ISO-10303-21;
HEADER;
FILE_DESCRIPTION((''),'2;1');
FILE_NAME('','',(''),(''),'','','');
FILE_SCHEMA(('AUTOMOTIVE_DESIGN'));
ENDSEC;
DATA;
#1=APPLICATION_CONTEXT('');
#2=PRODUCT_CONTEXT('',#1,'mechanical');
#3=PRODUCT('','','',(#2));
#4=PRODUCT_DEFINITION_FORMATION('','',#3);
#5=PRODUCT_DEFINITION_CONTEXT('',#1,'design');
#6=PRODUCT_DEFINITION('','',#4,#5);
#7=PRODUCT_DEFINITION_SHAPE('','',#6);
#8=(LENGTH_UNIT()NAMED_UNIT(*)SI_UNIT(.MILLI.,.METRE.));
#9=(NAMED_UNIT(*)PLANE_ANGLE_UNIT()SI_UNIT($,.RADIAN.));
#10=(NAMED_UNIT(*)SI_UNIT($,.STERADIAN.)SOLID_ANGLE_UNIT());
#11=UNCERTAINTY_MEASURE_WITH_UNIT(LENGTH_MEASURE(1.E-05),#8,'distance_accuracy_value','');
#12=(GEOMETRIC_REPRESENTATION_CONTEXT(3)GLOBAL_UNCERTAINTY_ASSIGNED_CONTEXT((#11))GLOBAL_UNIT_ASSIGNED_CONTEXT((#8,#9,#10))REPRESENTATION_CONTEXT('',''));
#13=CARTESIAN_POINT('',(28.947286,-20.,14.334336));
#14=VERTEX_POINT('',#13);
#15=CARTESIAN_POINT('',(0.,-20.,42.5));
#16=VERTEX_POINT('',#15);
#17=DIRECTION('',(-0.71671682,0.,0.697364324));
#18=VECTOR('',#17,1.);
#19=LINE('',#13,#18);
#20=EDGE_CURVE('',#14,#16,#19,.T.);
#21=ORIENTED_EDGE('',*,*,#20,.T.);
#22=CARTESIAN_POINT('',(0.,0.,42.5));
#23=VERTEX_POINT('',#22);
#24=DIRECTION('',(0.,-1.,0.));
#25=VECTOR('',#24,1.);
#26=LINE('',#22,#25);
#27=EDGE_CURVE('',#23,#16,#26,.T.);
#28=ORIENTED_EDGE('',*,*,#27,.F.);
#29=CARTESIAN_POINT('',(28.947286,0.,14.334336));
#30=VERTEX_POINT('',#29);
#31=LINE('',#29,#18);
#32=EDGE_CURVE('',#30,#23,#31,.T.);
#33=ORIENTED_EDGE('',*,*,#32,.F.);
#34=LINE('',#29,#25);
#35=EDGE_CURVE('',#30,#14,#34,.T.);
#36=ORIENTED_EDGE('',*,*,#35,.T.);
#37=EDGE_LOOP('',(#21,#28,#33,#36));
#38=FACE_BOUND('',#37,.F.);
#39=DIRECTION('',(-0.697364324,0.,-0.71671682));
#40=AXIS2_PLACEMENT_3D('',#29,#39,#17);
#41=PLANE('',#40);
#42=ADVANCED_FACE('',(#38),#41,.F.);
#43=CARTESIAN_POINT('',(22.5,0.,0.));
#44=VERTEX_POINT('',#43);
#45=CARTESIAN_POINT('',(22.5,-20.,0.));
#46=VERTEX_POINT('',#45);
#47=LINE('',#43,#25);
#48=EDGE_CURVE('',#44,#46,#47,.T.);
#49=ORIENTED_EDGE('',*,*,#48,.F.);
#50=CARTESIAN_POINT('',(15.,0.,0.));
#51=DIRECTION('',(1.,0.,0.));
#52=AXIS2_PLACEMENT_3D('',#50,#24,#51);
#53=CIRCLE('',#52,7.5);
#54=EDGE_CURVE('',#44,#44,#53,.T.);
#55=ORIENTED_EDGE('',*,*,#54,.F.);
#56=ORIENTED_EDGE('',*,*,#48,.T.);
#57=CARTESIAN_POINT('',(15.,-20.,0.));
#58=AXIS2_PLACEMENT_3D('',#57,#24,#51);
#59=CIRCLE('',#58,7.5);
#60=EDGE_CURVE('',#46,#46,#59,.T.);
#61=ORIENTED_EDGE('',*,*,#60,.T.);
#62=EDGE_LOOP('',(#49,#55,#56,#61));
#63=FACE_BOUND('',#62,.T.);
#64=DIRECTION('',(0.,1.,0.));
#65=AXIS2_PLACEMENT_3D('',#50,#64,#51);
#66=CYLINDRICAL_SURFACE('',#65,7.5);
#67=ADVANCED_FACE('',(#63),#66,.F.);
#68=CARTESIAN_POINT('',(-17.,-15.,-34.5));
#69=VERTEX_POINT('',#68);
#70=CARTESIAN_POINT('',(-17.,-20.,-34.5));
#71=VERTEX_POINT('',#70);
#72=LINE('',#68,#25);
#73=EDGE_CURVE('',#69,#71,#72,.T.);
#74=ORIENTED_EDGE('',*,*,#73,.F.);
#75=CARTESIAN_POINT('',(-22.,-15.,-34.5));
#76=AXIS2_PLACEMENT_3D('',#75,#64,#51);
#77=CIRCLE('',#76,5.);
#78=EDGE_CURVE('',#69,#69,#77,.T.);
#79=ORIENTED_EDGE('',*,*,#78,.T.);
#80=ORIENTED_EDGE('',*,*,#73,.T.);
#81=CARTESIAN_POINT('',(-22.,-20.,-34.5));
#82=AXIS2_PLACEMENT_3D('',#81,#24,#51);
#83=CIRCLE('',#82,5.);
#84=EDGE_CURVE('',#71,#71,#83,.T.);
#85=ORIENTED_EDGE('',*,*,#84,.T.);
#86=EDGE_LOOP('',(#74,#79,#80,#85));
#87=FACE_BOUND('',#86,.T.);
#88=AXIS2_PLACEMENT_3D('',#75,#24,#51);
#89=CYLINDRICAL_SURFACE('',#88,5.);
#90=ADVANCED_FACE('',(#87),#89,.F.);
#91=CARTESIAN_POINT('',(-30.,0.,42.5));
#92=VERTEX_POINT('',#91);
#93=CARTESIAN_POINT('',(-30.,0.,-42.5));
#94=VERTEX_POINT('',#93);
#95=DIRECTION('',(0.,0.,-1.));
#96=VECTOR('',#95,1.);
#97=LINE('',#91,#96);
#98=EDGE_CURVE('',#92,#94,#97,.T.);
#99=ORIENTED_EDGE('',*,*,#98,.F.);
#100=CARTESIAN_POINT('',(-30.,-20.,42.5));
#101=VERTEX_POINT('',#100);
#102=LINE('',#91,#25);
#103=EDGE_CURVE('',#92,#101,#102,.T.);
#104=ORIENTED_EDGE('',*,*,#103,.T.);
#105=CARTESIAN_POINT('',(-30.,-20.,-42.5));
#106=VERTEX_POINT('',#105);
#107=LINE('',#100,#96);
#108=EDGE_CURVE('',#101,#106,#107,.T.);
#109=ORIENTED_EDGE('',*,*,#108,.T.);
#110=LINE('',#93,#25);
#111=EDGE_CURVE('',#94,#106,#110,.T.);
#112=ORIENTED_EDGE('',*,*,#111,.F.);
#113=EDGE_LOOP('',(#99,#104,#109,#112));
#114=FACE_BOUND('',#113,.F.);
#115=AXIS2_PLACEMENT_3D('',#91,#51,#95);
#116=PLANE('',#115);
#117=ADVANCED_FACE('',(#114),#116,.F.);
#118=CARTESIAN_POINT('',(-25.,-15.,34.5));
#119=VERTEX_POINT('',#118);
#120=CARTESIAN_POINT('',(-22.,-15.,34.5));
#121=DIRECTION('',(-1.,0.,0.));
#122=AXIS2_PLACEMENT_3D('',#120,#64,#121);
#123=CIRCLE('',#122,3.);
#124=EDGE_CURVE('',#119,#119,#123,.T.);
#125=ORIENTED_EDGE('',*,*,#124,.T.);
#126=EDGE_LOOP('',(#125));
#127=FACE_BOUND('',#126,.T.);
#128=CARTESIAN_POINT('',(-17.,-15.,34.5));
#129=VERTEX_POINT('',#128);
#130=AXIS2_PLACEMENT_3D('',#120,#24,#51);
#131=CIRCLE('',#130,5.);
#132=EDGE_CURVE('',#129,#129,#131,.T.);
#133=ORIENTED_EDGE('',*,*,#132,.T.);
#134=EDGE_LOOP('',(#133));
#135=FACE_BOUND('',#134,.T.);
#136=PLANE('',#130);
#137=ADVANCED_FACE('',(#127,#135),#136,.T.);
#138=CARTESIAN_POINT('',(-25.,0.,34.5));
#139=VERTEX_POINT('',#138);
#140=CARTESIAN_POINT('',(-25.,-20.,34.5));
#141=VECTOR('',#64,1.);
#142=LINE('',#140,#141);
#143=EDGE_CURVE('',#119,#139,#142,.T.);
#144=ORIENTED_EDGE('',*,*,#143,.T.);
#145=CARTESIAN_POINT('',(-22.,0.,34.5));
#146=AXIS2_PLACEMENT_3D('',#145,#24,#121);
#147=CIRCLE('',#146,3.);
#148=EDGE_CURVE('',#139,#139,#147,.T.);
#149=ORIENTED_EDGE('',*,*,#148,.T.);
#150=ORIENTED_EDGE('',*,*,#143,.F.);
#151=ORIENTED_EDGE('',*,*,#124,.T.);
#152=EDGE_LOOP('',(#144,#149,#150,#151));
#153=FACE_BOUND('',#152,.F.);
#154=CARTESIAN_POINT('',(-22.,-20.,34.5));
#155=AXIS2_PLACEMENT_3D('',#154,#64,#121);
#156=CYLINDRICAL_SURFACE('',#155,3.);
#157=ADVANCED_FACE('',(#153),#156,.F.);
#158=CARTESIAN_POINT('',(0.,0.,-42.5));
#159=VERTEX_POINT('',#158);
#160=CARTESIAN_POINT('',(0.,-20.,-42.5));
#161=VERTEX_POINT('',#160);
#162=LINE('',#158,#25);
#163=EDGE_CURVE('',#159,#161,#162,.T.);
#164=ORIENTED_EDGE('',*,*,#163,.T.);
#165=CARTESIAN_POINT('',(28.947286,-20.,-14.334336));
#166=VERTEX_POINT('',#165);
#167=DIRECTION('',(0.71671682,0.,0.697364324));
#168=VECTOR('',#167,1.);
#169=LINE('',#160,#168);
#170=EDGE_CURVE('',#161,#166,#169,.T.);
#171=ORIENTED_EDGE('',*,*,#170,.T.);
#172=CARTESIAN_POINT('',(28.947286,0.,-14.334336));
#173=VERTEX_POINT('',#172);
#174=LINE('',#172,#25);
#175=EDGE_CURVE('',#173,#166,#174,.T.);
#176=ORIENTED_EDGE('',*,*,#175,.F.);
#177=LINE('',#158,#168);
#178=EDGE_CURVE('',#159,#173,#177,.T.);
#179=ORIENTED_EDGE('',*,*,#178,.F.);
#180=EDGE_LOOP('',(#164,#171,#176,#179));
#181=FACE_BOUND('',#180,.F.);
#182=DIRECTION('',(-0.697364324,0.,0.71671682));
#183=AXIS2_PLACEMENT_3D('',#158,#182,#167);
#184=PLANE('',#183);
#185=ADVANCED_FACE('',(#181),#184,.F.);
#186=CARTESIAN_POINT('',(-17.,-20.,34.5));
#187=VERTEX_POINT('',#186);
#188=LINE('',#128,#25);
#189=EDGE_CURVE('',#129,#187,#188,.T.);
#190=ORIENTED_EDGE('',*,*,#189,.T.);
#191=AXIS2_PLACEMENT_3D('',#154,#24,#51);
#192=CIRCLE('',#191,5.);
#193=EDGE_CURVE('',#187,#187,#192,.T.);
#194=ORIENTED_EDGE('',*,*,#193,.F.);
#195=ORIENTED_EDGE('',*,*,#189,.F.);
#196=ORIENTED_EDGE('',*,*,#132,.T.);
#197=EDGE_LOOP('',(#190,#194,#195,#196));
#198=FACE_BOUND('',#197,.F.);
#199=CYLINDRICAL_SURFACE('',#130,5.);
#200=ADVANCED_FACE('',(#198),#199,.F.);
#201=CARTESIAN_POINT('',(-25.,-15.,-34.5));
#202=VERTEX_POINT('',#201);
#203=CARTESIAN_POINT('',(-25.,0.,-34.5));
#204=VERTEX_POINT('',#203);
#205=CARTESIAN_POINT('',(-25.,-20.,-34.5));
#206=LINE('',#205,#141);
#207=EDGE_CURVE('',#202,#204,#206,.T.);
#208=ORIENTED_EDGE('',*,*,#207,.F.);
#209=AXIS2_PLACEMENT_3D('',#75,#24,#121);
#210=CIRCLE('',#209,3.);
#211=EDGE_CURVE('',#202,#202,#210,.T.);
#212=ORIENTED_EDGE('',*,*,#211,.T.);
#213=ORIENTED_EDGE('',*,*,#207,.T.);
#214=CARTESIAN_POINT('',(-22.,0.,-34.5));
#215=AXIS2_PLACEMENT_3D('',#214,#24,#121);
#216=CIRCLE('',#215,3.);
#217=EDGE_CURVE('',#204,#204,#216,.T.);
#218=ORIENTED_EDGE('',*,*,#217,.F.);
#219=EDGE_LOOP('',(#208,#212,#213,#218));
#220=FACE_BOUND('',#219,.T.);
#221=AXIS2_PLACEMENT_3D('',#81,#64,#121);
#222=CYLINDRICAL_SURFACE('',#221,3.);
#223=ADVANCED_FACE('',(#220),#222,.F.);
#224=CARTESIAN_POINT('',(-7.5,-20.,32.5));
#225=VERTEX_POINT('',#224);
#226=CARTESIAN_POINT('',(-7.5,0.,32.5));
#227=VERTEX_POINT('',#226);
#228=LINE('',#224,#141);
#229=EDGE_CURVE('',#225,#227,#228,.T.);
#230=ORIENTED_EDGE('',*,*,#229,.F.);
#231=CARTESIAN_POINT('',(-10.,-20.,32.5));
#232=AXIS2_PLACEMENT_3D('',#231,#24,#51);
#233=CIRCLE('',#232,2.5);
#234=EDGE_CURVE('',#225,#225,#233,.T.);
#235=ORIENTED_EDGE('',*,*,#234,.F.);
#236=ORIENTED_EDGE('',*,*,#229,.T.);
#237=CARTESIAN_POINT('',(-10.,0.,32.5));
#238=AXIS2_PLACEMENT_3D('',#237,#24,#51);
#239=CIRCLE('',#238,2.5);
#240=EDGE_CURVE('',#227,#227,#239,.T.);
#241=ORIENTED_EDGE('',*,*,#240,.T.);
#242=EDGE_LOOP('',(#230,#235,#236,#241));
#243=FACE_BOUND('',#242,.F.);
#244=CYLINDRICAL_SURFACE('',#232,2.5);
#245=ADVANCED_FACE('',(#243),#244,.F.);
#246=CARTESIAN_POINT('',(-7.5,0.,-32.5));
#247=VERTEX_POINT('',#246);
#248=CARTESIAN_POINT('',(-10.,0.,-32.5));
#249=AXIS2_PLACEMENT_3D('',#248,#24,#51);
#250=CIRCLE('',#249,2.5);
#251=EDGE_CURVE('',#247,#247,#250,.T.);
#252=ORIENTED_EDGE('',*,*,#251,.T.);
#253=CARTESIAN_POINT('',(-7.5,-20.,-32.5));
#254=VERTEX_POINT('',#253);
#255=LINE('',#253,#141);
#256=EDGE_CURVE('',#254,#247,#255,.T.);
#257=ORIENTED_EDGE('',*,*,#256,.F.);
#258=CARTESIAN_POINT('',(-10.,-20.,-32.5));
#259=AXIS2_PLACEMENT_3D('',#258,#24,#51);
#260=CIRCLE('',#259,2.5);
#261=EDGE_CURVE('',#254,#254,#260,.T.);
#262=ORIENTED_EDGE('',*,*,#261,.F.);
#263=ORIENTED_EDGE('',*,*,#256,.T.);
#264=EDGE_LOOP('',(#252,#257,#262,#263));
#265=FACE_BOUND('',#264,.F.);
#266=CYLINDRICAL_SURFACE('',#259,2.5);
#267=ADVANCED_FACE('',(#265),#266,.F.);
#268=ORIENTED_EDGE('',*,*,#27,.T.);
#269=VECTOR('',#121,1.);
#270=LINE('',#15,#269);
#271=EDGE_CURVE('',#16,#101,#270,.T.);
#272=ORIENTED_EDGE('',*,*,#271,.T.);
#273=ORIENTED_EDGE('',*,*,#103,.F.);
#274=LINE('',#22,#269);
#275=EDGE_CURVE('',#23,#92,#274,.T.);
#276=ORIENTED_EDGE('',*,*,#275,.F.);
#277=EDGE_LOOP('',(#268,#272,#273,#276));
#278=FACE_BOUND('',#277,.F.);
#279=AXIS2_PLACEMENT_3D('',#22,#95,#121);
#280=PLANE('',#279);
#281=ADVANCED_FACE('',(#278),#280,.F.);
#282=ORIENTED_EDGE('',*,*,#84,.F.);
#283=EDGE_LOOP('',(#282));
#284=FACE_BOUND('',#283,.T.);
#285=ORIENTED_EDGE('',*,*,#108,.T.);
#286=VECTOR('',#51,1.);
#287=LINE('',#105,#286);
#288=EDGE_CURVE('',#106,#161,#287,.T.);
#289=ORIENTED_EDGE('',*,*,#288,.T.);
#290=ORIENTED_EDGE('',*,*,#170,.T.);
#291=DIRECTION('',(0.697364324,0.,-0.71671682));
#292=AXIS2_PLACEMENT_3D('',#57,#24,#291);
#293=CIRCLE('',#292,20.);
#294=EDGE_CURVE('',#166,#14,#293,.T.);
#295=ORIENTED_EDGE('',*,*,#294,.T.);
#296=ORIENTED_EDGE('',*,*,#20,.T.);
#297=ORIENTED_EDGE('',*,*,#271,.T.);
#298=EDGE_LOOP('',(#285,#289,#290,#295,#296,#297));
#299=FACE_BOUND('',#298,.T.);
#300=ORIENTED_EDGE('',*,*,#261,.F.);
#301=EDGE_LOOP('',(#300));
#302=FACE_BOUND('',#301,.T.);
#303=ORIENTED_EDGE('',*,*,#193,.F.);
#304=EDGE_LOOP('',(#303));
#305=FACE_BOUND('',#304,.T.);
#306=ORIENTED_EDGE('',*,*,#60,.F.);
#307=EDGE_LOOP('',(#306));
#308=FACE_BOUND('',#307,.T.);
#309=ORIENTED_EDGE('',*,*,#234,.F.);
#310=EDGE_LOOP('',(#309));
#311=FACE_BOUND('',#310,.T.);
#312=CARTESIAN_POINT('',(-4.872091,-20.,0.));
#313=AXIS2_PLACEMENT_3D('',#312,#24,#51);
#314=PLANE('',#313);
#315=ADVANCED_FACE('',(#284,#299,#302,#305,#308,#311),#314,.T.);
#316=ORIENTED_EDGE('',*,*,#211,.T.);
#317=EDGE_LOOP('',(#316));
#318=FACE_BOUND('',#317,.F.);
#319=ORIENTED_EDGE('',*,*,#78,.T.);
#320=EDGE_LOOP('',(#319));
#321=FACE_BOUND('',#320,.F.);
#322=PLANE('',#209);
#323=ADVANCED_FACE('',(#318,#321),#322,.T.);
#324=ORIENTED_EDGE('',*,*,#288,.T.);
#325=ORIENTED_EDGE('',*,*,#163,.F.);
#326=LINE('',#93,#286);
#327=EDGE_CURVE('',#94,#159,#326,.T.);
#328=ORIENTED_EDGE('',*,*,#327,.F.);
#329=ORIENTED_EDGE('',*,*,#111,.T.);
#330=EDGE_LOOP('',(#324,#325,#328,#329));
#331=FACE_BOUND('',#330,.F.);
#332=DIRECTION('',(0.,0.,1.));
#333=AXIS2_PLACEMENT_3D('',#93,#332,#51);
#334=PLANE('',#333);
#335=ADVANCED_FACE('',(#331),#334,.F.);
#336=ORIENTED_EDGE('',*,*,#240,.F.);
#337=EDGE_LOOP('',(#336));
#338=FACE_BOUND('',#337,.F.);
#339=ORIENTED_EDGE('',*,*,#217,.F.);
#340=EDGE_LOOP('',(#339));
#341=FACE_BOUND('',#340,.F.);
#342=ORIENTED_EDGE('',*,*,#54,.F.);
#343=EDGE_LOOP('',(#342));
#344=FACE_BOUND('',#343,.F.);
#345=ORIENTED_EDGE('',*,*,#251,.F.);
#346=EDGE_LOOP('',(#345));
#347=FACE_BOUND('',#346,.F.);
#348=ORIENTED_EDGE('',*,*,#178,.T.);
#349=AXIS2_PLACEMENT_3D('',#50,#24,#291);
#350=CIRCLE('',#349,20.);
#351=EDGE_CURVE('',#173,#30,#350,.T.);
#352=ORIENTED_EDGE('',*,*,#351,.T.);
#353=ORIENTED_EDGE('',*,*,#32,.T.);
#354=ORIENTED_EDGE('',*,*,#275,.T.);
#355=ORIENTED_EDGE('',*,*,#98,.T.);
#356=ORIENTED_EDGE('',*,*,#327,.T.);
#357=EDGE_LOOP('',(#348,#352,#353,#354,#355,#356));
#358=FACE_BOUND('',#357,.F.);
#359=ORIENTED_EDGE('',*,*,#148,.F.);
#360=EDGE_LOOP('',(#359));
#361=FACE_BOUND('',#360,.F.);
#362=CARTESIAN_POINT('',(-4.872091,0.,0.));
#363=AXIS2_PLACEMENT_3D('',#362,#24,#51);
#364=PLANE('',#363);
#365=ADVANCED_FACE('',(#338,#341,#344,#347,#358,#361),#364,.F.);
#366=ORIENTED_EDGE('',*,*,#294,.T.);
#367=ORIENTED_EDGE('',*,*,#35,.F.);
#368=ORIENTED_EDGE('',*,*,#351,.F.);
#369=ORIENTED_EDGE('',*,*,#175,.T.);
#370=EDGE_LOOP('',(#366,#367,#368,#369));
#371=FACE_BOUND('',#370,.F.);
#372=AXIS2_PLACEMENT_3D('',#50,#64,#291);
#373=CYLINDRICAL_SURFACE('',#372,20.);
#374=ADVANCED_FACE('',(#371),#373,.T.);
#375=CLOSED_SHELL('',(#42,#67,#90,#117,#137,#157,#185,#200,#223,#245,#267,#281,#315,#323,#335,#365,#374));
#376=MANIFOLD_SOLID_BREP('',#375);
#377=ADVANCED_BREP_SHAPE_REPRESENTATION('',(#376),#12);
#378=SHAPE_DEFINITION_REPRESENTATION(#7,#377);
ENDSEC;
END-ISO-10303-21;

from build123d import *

# Parameters (mm, degrees)
F0_R           = 7.5
F1_DEPTH       = 20
F2_R           = 2.5
F3_DEPTH       = 20
F5_D           = 6
F5_DEPTH       = 20
F5_CBORE_D     = 10
F5_CBORE_DEPTH = 5
F5_TIP         = 1.8025818571


# Not quite as in the source:
# - a pattern or mirror of a feature is missing from the dataset's text; its kind, count and spacing are read off the source's solid


with BuildPart() as f1:
    # F0 (on Front) → F1 (new body)
    with BuildSketch(Plane.XZ):
        with BuildLine():
            Line((0, 42.5), (-30, 42.5))
            Line((-30, 42.5), (-30, -42.5))
            Line((-30, -42.5), (0, -42.5))
            Line((0, -42.5), (28.9472864716, -14.3343364017))
            ThreePointArc((28.9472864716, -14.3343364017), (35, 0), (28.9472864716, 14.3343364017))
            Line((28.9472864716, 14.3343364017), (0, 42.5))
        make_face()
        with Locations((15, 0)):
            Circle(F0_R, mode=Mode.SUBTRACT)
    extrude(amount=F1_DEPTH)

    # F2 (on face) → F3 (cut, through all)
    with BuildSketch(Plane.XZ.offset(20)):
        with Locations((-10, 32.5)):
            Circle(F2_R)
        with Locations((-10, -32.5)):
            Circle(F2_R)
    extrude(amount=-F3_DEPTH, mode=Mode.SUBTRACT)

    # F5
    with Locations(Plane.XZ.offset(20)):
        with Locations((-22, 34.5)):
            f5 = CounterBoreHole(F5_D / 2, F5_CBORE_D / 2, F5_CBORE_DEPTH, depth=F5_DEPTH)
            with Locations((0, 0, -(F5_DEPTH + F5_TIP / 2))):  # 118° drill point
                Cone(0, F5_D / 2, F5_TIP, mode=Mode.SUBTRACT)

    # F5_copies: F5 across plane
    add(f5.mirror(Plane(origin=(0, 0, 0), x_dir=(-1, 0, 0), z_dir=(0, 0, -1))), mode=Mode.SUBTRACT)


solid = f1.part
